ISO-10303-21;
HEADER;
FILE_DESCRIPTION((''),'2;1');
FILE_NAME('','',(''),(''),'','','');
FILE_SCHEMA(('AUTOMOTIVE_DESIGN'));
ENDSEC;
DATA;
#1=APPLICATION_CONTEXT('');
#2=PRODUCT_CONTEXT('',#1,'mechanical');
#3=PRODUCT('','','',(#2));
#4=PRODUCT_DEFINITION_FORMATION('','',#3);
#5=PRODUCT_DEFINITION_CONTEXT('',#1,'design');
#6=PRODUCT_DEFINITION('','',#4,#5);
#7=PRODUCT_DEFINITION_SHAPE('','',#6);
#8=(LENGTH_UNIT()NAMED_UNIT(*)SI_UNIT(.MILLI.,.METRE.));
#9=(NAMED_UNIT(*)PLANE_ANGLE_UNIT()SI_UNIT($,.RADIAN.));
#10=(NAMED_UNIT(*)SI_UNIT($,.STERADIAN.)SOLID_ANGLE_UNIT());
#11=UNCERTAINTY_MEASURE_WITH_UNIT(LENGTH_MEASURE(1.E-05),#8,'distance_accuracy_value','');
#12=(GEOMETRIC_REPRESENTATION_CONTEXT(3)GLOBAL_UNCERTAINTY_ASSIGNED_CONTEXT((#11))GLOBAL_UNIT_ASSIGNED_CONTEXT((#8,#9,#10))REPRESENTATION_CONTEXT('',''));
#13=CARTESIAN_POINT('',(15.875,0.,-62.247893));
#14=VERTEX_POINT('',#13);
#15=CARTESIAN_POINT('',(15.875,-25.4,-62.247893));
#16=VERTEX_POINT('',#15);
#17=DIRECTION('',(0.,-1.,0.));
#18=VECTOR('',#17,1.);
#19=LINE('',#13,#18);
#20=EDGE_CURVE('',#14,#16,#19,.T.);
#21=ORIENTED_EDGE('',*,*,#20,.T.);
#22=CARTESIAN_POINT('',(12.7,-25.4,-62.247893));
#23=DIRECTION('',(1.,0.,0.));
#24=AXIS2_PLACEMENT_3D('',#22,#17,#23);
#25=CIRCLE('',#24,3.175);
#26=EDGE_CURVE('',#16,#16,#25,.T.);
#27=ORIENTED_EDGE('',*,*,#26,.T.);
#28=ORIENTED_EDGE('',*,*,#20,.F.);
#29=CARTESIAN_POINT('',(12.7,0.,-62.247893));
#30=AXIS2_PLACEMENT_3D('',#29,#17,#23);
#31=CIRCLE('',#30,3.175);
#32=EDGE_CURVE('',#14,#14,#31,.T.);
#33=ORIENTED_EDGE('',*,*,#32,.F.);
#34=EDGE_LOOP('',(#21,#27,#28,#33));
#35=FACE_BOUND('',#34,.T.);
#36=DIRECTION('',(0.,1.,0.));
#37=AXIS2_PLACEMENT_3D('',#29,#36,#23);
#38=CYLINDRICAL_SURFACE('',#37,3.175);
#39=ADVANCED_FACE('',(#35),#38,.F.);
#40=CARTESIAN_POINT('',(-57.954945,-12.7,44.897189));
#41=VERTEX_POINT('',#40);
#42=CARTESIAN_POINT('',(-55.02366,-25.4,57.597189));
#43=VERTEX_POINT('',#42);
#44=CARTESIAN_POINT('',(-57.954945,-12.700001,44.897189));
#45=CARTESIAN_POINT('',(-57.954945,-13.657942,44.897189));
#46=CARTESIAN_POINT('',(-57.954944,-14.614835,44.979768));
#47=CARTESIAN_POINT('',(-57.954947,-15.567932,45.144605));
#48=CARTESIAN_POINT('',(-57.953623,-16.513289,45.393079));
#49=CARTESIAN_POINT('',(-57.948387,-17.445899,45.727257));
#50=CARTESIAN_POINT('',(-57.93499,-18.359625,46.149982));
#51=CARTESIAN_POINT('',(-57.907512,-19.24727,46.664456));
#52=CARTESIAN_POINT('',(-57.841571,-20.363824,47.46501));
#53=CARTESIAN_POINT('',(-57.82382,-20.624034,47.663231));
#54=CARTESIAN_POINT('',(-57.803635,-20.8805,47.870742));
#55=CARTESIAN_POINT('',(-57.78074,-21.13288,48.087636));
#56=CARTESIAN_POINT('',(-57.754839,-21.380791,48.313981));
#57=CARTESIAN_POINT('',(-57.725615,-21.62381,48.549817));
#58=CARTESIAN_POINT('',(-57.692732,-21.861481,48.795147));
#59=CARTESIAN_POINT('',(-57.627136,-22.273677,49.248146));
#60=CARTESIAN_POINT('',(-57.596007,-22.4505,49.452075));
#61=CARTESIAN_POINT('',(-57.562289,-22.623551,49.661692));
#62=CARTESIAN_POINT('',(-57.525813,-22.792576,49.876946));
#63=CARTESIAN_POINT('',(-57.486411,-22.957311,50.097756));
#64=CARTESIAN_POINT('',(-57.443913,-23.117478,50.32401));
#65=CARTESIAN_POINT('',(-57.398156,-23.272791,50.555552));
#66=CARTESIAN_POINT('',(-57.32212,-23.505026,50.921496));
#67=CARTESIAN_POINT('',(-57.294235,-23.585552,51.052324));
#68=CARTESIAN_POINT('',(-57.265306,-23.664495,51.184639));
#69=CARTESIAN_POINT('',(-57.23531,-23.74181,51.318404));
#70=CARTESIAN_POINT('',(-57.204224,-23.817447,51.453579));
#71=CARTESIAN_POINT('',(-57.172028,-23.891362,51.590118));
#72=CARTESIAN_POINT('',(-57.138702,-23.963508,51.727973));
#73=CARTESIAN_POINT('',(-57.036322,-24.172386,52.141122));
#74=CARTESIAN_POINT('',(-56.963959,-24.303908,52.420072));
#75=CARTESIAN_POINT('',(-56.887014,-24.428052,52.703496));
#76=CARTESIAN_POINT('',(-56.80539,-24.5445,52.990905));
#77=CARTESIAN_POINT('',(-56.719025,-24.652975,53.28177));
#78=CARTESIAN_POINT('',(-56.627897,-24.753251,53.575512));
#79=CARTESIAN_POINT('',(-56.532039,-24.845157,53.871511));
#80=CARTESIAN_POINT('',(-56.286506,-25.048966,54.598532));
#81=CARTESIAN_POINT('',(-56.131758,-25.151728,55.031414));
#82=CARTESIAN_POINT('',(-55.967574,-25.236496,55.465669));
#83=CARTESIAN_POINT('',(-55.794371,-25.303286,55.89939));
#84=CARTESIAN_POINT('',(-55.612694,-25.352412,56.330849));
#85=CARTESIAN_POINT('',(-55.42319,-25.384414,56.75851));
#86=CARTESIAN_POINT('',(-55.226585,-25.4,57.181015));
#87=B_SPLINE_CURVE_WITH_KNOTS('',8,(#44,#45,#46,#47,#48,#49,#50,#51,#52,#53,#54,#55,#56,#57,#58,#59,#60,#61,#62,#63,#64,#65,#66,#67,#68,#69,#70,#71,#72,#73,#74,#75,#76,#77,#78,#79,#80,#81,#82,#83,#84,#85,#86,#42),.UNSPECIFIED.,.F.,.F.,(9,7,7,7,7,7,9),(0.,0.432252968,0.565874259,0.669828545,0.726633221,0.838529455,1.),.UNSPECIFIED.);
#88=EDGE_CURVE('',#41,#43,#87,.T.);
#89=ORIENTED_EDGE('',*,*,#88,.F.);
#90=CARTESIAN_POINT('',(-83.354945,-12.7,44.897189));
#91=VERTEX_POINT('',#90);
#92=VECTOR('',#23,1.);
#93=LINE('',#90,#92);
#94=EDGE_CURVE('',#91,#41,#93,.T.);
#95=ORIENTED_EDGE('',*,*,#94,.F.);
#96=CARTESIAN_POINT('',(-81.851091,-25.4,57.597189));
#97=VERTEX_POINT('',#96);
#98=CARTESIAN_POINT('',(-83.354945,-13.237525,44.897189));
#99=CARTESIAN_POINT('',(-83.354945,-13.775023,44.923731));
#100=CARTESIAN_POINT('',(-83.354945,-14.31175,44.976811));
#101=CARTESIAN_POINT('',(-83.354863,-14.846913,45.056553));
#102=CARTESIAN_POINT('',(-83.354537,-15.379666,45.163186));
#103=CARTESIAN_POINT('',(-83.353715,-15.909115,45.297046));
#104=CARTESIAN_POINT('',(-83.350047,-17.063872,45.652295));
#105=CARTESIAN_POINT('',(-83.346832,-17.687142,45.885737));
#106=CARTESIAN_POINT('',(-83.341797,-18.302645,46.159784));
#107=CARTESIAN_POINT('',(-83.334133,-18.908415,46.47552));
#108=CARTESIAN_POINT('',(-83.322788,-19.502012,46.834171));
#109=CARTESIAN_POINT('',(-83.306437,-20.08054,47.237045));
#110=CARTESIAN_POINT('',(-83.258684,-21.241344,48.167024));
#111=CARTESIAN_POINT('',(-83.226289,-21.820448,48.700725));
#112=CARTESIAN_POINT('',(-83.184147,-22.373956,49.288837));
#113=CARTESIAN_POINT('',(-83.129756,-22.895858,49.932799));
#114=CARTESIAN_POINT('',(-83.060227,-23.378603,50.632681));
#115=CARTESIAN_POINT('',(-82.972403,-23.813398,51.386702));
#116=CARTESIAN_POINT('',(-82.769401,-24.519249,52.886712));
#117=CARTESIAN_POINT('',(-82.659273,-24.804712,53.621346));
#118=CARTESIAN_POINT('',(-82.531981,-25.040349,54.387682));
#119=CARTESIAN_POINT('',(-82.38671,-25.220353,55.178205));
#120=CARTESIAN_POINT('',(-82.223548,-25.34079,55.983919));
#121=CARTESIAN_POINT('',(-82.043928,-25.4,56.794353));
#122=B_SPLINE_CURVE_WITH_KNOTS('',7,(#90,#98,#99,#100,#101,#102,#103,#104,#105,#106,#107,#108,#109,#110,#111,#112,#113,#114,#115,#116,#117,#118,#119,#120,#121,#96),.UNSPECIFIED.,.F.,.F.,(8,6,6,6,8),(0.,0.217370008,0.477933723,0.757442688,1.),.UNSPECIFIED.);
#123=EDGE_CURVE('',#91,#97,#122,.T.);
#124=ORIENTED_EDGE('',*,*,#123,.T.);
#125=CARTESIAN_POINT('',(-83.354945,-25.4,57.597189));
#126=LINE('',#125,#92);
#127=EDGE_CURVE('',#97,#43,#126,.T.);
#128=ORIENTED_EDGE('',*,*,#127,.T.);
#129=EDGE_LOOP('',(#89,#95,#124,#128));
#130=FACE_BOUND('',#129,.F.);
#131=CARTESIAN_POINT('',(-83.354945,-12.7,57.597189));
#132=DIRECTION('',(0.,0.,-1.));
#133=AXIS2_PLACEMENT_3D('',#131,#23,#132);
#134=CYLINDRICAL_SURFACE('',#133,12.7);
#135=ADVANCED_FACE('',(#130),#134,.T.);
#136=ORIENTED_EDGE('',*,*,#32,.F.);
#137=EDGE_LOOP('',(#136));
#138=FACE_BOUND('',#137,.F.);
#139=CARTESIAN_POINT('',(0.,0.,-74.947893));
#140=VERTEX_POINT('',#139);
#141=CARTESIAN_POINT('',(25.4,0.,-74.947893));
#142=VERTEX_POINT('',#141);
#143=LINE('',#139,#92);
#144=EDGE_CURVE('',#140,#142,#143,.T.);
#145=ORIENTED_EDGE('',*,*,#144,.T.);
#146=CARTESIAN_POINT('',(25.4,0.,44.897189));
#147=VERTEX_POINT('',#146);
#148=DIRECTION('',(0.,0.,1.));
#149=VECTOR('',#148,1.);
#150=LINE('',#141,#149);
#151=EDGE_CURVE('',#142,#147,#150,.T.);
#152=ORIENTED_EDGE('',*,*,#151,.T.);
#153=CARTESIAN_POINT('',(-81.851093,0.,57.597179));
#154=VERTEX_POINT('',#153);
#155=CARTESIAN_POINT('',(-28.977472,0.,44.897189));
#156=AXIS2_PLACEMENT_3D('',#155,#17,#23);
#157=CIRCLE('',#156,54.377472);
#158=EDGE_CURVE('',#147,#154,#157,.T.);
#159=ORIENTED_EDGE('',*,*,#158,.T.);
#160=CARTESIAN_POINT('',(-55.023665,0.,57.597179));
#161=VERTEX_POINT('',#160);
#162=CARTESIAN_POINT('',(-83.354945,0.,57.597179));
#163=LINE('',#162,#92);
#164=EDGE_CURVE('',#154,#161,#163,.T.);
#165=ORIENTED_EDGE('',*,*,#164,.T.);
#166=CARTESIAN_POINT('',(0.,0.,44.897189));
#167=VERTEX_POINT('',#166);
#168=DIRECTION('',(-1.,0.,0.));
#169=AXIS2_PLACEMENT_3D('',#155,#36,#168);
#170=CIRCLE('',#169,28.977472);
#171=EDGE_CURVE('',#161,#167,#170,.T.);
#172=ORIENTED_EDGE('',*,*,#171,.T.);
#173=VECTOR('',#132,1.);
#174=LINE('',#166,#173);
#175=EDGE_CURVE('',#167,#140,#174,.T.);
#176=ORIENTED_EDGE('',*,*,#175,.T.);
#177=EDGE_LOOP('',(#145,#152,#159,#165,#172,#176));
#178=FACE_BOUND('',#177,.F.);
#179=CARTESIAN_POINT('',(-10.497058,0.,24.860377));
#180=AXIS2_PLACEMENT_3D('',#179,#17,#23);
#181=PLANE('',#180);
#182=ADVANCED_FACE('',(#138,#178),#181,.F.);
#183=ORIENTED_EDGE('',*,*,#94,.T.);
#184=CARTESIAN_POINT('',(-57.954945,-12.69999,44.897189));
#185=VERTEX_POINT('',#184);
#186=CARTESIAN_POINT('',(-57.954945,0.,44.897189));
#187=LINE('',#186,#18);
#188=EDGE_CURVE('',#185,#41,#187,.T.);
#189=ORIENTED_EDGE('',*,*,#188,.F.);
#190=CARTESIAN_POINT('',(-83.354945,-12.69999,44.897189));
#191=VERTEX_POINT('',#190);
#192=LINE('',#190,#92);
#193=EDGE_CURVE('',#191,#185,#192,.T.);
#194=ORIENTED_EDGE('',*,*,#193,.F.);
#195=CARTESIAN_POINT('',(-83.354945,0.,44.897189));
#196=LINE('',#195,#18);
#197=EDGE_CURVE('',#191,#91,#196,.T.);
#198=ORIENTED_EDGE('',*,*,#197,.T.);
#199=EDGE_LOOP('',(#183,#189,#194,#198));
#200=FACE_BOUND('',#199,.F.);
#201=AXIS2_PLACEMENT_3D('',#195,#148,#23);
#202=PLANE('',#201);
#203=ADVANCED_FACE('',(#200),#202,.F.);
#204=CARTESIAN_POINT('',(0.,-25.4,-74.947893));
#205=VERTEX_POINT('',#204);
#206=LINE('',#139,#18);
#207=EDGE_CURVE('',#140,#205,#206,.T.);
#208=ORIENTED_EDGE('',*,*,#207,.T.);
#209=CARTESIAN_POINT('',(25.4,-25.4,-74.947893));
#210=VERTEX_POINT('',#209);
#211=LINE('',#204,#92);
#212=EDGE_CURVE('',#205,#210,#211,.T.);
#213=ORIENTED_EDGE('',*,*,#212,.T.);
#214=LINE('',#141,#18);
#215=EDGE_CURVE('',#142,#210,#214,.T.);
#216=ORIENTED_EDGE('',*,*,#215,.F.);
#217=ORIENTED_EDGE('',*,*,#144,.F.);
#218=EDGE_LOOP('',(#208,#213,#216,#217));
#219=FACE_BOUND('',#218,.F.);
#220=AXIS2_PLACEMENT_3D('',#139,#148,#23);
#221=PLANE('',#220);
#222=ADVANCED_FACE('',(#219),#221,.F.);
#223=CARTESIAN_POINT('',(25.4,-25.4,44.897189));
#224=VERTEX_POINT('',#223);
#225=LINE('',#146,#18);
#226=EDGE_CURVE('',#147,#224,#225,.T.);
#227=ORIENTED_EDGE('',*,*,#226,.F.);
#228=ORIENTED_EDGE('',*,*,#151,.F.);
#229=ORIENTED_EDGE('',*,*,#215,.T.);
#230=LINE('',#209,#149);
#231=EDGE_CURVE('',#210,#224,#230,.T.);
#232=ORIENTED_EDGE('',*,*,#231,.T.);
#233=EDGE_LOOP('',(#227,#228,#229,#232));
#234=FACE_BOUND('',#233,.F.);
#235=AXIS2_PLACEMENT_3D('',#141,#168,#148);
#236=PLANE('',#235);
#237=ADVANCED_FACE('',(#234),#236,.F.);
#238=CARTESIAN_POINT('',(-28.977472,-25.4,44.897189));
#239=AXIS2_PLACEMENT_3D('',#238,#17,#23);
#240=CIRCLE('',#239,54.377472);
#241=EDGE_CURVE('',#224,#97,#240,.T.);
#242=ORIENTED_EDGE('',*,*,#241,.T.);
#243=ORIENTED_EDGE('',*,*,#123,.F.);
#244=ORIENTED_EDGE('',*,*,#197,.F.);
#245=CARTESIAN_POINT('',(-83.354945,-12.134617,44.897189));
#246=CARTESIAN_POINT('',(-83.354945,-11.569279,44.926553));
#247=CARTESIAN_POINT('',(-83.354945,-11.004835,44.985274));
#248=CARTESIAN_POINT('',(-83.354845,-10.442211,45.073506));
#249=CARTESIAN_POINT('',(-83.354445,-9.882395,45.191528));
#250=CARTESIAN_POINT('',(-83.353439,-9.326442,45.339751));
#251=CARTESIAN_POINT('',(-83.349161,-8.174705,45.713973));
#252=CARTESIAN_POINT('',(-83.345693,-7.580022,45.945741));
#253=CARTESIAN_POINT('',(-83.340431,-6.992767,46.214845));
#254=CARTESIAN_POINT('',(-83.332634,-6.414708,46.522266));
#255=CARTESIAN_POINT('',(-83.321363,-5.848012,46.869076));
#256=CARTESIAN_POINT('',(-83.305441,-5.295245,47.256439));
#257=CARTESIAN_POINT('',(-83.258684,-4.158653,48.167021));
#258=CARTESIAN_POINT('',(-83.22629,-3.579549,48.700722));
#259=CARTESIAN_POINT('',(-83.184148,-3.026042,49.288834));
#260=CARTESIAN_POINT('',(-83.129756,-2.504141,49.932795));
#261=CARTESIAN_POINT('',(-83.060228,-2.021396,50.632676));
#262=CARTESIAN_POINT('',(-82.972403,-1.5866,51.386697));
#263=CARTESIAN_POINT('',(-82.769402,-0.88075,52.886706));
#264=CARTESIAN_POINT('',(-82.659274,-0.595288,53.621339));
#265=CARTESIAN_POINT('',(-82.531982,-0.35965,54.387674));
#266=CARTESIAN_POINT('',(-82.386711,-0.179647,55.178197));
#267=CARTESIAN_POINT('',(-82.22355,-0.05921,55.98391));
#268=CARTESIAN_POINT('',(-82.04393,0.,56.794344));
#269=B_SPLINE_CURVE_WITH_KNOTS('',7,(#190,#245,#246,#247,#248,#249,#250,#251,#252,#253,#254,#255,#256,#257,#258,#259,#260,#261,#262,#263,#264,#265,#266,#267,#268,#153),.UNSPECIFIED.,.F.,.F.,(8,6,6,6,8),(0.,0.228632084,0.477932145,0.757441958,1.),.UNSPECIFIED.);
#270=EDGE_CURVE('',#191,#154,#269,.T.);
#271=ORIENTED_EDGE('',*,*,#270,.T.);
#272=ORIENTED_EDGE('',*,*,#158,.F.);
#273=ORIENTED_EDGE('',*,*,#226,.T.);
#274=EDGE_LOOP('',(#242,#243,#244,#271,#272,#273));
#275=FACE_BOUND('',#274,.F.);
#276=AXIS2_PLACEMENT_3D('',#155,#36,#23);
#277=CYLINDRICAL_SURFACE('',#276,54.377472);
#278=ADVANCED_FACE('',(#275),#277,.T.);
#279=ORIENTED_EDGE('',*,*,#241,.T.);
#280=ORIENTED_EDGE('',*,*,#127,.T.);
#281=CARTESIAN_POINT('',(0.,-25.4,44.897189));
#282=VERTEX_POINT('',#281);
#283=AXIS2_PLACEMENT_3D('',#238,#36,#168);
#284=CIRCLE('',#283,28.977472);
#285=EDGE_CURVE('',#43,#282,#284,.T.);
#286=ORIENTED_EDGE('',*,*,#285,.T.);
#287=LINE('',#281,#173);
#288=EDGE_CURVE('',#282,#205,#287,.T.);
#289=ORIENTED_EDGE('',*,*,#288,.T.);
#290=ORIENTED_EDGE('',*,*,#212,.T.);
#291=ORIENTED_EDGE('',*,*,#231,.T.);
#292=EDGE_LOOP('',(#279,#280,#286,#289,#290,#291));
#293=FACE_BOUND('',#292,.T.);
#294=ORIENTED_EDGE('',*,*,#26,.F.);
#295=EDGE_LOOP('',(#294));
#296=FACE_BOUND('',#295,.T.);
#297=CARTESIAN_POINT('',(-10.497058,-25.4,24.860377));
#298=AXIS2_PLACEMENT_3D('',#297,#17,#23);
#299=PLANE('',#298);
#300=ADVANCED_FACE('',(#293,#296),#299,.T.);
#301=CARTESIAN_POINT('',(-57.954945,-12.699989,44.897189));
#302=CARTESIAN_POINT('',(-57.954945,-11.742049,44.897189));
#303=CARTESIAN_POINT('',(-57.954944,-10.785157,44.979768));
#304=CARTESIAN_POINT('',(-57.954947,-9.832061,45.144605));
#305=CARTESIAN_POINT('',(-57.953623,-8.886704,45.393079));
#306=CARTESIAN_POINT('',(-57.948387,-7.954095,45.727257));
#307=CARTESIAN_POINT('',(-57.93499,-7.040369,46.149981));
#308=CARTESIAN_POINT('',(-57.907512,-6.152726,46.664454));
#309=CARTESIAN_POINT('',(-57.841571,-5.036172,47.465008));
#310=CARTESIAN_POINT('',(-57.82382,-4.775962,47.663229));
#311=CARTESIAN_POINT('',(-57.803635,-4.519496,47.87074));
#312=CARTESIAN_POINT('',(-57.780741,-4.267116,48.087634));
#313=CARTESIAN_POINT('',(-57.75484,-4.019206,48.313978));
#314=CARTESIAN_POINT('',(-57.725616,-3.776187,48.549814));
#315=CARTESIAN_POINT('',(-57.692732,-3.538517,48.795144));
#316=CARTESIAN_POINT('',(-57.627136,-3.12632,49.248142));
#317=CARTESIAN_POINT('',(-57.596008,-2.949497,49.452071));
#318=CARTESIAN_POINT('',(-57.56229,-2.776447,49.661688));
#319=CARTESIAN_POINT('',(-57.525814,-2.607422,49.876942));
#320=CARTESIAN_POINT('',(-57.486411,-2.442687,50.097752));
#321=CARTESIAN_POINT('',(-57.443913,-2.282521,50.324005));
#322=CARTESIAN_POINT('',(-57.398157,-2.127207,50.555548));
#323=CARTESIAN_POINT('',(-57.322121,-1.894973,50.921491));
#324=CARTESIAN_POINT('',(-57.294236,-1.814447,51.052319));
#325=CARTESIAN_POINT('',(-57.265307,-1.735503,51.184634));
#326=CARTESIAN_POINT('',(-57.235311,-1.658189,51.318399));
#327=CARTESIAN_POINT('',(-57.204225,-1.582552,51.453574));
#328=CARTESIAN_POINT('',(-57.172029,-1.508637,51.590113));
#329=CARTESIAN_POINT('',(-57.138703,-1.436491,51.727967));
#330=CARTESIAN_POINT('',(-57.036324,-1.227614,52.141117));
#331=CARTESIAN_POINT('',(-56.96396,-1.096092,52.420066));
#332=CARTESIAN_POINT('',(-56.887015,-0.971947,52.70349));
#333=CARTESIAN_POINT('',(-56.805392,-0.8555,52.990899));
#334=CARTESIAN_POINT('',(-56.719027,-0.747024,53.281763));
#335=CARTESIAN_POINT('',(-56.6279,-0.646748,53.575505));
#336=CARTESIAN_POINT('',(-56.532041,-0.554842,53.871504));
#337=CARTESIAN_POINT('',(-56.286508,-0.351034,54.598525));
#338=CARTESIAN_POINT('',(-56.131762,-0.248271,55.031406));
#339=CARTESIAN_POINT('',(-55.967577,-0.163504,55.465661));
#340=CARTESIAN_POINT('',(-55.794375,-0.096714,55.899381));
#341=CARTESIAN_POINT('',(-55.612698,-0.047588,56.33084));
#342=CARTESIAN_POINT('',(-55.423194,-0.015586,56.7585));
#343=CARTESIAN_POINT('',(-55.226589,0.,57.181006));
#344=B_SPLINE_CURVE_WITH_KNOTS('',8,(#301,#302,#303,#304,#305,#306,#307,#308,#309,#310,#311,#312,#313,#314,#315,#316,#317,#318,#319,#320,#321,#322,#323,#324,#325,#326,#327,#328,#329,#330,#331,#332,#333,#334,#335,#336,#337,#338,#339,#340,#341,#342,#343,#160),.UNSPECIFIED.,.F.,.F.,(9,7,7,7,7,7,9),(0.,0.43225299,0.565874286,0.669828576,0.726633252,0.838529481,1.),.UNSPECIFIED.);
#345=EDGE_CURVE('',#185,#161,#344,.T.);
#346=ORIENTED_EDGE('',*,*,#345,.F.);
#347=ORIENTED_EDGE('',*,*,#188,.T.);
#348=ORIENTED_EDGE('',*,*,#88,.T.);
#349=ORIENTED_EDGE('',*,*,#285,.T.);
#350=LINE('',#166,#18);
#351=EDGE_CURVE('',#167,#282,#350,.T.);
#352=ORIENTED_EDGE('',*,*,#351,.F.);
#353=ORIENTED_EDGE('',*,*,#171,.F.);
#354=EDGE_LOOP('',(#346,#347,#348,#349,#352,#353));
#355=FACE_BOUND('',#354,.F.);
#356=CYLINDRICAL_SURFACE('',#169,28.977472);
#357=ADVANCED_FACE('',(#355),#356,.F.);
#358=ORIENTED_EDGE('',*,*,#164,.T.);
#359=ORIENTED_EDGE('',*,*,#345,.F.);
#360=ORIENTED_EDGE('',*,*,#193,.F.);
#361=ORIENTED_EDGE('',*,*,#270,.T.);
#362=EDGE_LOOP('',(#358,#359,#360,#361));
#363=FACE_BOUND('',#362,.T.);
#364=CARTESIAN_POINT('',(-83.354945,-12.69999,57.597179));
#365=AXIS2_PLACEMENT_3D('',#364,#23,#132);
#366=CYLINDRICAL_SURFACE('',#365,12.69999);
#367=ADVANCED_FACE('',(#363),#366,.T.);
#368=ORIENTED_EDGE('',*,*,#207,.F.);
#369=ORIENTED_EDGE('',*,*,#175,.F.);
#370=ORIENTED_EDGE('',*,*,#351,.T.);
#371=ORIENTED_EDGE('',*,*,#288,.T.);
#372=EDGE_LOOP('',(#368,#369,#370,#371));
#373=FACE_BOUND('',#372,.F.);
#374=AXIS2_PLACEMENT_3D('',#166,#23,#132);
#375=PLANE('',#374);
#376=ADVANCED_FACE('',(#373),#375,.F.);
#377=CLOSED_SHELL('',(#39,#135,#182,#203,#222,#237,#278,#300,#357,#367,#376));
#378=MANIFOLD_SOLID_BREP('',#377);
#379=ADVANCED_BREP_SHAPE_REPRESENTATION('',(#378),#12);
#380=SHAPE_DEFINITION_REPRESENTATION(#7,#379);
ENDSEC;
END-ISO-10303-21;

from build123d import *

# Parameters (mm, degrees)
F0_R     = 3.175
F1_DEPTH = 25.4
F2_R     = 12.7
F3_R     = 12.69999


# Not quite as in the source:
# - a fillet or chamfer is up to 0.001 mm smaller than in the source, because OpenCascade refuses the exact size


with BuildPart() as f1:
    # F0 (on Front) → F1 (new body)
    with BuildSketch(Plane.XZ):
        with BuildLine():
            Line((0, 44.897188701), (0, -74.9478926185))
            Line((0, -74.9478926185), (25.4, -74.9478926185))
            Line((25.4, -74.9478926185), (25.4, 44.897188701))
            ThreePointArc((25.4, 44.897188701), (-28.9774724535, 99.2746611545), (-83.3549449071, 44.897188701))
            Line((-83.3549449071, 44.897188701), (-57.9549449071, 44.897188701))
            ThreePointArc((-57.9549449071, 44.897188701), (-28.9774724535, 73.8746611545), (0, 44.897188701))
        make_face()
        with Locations((12.7, -62.2478926185)):
            Circle(F0_R, mode=Mode.SUBTRACT)
    extrude(amount=F1_DEPTH)

    # F2
    f2_edges = [f1.edges().sort_by_distance(p)[0] for p in [
        (-70.654945, -25.4, 44.897189),
    ]]
    fillet(f2_edges, radius=F2_R)

    # F3 (radius 12.7 in the source; OpenCascade refuses exactly that, so slightly less here)
    f3_edges = [f1.edges().sort_by_distance(p)[0] for p in [
        (-70.654945, 0, 44.897189),
    ]]
    fillet(f3_edges, radius=F3_R)


solid = f1.part
